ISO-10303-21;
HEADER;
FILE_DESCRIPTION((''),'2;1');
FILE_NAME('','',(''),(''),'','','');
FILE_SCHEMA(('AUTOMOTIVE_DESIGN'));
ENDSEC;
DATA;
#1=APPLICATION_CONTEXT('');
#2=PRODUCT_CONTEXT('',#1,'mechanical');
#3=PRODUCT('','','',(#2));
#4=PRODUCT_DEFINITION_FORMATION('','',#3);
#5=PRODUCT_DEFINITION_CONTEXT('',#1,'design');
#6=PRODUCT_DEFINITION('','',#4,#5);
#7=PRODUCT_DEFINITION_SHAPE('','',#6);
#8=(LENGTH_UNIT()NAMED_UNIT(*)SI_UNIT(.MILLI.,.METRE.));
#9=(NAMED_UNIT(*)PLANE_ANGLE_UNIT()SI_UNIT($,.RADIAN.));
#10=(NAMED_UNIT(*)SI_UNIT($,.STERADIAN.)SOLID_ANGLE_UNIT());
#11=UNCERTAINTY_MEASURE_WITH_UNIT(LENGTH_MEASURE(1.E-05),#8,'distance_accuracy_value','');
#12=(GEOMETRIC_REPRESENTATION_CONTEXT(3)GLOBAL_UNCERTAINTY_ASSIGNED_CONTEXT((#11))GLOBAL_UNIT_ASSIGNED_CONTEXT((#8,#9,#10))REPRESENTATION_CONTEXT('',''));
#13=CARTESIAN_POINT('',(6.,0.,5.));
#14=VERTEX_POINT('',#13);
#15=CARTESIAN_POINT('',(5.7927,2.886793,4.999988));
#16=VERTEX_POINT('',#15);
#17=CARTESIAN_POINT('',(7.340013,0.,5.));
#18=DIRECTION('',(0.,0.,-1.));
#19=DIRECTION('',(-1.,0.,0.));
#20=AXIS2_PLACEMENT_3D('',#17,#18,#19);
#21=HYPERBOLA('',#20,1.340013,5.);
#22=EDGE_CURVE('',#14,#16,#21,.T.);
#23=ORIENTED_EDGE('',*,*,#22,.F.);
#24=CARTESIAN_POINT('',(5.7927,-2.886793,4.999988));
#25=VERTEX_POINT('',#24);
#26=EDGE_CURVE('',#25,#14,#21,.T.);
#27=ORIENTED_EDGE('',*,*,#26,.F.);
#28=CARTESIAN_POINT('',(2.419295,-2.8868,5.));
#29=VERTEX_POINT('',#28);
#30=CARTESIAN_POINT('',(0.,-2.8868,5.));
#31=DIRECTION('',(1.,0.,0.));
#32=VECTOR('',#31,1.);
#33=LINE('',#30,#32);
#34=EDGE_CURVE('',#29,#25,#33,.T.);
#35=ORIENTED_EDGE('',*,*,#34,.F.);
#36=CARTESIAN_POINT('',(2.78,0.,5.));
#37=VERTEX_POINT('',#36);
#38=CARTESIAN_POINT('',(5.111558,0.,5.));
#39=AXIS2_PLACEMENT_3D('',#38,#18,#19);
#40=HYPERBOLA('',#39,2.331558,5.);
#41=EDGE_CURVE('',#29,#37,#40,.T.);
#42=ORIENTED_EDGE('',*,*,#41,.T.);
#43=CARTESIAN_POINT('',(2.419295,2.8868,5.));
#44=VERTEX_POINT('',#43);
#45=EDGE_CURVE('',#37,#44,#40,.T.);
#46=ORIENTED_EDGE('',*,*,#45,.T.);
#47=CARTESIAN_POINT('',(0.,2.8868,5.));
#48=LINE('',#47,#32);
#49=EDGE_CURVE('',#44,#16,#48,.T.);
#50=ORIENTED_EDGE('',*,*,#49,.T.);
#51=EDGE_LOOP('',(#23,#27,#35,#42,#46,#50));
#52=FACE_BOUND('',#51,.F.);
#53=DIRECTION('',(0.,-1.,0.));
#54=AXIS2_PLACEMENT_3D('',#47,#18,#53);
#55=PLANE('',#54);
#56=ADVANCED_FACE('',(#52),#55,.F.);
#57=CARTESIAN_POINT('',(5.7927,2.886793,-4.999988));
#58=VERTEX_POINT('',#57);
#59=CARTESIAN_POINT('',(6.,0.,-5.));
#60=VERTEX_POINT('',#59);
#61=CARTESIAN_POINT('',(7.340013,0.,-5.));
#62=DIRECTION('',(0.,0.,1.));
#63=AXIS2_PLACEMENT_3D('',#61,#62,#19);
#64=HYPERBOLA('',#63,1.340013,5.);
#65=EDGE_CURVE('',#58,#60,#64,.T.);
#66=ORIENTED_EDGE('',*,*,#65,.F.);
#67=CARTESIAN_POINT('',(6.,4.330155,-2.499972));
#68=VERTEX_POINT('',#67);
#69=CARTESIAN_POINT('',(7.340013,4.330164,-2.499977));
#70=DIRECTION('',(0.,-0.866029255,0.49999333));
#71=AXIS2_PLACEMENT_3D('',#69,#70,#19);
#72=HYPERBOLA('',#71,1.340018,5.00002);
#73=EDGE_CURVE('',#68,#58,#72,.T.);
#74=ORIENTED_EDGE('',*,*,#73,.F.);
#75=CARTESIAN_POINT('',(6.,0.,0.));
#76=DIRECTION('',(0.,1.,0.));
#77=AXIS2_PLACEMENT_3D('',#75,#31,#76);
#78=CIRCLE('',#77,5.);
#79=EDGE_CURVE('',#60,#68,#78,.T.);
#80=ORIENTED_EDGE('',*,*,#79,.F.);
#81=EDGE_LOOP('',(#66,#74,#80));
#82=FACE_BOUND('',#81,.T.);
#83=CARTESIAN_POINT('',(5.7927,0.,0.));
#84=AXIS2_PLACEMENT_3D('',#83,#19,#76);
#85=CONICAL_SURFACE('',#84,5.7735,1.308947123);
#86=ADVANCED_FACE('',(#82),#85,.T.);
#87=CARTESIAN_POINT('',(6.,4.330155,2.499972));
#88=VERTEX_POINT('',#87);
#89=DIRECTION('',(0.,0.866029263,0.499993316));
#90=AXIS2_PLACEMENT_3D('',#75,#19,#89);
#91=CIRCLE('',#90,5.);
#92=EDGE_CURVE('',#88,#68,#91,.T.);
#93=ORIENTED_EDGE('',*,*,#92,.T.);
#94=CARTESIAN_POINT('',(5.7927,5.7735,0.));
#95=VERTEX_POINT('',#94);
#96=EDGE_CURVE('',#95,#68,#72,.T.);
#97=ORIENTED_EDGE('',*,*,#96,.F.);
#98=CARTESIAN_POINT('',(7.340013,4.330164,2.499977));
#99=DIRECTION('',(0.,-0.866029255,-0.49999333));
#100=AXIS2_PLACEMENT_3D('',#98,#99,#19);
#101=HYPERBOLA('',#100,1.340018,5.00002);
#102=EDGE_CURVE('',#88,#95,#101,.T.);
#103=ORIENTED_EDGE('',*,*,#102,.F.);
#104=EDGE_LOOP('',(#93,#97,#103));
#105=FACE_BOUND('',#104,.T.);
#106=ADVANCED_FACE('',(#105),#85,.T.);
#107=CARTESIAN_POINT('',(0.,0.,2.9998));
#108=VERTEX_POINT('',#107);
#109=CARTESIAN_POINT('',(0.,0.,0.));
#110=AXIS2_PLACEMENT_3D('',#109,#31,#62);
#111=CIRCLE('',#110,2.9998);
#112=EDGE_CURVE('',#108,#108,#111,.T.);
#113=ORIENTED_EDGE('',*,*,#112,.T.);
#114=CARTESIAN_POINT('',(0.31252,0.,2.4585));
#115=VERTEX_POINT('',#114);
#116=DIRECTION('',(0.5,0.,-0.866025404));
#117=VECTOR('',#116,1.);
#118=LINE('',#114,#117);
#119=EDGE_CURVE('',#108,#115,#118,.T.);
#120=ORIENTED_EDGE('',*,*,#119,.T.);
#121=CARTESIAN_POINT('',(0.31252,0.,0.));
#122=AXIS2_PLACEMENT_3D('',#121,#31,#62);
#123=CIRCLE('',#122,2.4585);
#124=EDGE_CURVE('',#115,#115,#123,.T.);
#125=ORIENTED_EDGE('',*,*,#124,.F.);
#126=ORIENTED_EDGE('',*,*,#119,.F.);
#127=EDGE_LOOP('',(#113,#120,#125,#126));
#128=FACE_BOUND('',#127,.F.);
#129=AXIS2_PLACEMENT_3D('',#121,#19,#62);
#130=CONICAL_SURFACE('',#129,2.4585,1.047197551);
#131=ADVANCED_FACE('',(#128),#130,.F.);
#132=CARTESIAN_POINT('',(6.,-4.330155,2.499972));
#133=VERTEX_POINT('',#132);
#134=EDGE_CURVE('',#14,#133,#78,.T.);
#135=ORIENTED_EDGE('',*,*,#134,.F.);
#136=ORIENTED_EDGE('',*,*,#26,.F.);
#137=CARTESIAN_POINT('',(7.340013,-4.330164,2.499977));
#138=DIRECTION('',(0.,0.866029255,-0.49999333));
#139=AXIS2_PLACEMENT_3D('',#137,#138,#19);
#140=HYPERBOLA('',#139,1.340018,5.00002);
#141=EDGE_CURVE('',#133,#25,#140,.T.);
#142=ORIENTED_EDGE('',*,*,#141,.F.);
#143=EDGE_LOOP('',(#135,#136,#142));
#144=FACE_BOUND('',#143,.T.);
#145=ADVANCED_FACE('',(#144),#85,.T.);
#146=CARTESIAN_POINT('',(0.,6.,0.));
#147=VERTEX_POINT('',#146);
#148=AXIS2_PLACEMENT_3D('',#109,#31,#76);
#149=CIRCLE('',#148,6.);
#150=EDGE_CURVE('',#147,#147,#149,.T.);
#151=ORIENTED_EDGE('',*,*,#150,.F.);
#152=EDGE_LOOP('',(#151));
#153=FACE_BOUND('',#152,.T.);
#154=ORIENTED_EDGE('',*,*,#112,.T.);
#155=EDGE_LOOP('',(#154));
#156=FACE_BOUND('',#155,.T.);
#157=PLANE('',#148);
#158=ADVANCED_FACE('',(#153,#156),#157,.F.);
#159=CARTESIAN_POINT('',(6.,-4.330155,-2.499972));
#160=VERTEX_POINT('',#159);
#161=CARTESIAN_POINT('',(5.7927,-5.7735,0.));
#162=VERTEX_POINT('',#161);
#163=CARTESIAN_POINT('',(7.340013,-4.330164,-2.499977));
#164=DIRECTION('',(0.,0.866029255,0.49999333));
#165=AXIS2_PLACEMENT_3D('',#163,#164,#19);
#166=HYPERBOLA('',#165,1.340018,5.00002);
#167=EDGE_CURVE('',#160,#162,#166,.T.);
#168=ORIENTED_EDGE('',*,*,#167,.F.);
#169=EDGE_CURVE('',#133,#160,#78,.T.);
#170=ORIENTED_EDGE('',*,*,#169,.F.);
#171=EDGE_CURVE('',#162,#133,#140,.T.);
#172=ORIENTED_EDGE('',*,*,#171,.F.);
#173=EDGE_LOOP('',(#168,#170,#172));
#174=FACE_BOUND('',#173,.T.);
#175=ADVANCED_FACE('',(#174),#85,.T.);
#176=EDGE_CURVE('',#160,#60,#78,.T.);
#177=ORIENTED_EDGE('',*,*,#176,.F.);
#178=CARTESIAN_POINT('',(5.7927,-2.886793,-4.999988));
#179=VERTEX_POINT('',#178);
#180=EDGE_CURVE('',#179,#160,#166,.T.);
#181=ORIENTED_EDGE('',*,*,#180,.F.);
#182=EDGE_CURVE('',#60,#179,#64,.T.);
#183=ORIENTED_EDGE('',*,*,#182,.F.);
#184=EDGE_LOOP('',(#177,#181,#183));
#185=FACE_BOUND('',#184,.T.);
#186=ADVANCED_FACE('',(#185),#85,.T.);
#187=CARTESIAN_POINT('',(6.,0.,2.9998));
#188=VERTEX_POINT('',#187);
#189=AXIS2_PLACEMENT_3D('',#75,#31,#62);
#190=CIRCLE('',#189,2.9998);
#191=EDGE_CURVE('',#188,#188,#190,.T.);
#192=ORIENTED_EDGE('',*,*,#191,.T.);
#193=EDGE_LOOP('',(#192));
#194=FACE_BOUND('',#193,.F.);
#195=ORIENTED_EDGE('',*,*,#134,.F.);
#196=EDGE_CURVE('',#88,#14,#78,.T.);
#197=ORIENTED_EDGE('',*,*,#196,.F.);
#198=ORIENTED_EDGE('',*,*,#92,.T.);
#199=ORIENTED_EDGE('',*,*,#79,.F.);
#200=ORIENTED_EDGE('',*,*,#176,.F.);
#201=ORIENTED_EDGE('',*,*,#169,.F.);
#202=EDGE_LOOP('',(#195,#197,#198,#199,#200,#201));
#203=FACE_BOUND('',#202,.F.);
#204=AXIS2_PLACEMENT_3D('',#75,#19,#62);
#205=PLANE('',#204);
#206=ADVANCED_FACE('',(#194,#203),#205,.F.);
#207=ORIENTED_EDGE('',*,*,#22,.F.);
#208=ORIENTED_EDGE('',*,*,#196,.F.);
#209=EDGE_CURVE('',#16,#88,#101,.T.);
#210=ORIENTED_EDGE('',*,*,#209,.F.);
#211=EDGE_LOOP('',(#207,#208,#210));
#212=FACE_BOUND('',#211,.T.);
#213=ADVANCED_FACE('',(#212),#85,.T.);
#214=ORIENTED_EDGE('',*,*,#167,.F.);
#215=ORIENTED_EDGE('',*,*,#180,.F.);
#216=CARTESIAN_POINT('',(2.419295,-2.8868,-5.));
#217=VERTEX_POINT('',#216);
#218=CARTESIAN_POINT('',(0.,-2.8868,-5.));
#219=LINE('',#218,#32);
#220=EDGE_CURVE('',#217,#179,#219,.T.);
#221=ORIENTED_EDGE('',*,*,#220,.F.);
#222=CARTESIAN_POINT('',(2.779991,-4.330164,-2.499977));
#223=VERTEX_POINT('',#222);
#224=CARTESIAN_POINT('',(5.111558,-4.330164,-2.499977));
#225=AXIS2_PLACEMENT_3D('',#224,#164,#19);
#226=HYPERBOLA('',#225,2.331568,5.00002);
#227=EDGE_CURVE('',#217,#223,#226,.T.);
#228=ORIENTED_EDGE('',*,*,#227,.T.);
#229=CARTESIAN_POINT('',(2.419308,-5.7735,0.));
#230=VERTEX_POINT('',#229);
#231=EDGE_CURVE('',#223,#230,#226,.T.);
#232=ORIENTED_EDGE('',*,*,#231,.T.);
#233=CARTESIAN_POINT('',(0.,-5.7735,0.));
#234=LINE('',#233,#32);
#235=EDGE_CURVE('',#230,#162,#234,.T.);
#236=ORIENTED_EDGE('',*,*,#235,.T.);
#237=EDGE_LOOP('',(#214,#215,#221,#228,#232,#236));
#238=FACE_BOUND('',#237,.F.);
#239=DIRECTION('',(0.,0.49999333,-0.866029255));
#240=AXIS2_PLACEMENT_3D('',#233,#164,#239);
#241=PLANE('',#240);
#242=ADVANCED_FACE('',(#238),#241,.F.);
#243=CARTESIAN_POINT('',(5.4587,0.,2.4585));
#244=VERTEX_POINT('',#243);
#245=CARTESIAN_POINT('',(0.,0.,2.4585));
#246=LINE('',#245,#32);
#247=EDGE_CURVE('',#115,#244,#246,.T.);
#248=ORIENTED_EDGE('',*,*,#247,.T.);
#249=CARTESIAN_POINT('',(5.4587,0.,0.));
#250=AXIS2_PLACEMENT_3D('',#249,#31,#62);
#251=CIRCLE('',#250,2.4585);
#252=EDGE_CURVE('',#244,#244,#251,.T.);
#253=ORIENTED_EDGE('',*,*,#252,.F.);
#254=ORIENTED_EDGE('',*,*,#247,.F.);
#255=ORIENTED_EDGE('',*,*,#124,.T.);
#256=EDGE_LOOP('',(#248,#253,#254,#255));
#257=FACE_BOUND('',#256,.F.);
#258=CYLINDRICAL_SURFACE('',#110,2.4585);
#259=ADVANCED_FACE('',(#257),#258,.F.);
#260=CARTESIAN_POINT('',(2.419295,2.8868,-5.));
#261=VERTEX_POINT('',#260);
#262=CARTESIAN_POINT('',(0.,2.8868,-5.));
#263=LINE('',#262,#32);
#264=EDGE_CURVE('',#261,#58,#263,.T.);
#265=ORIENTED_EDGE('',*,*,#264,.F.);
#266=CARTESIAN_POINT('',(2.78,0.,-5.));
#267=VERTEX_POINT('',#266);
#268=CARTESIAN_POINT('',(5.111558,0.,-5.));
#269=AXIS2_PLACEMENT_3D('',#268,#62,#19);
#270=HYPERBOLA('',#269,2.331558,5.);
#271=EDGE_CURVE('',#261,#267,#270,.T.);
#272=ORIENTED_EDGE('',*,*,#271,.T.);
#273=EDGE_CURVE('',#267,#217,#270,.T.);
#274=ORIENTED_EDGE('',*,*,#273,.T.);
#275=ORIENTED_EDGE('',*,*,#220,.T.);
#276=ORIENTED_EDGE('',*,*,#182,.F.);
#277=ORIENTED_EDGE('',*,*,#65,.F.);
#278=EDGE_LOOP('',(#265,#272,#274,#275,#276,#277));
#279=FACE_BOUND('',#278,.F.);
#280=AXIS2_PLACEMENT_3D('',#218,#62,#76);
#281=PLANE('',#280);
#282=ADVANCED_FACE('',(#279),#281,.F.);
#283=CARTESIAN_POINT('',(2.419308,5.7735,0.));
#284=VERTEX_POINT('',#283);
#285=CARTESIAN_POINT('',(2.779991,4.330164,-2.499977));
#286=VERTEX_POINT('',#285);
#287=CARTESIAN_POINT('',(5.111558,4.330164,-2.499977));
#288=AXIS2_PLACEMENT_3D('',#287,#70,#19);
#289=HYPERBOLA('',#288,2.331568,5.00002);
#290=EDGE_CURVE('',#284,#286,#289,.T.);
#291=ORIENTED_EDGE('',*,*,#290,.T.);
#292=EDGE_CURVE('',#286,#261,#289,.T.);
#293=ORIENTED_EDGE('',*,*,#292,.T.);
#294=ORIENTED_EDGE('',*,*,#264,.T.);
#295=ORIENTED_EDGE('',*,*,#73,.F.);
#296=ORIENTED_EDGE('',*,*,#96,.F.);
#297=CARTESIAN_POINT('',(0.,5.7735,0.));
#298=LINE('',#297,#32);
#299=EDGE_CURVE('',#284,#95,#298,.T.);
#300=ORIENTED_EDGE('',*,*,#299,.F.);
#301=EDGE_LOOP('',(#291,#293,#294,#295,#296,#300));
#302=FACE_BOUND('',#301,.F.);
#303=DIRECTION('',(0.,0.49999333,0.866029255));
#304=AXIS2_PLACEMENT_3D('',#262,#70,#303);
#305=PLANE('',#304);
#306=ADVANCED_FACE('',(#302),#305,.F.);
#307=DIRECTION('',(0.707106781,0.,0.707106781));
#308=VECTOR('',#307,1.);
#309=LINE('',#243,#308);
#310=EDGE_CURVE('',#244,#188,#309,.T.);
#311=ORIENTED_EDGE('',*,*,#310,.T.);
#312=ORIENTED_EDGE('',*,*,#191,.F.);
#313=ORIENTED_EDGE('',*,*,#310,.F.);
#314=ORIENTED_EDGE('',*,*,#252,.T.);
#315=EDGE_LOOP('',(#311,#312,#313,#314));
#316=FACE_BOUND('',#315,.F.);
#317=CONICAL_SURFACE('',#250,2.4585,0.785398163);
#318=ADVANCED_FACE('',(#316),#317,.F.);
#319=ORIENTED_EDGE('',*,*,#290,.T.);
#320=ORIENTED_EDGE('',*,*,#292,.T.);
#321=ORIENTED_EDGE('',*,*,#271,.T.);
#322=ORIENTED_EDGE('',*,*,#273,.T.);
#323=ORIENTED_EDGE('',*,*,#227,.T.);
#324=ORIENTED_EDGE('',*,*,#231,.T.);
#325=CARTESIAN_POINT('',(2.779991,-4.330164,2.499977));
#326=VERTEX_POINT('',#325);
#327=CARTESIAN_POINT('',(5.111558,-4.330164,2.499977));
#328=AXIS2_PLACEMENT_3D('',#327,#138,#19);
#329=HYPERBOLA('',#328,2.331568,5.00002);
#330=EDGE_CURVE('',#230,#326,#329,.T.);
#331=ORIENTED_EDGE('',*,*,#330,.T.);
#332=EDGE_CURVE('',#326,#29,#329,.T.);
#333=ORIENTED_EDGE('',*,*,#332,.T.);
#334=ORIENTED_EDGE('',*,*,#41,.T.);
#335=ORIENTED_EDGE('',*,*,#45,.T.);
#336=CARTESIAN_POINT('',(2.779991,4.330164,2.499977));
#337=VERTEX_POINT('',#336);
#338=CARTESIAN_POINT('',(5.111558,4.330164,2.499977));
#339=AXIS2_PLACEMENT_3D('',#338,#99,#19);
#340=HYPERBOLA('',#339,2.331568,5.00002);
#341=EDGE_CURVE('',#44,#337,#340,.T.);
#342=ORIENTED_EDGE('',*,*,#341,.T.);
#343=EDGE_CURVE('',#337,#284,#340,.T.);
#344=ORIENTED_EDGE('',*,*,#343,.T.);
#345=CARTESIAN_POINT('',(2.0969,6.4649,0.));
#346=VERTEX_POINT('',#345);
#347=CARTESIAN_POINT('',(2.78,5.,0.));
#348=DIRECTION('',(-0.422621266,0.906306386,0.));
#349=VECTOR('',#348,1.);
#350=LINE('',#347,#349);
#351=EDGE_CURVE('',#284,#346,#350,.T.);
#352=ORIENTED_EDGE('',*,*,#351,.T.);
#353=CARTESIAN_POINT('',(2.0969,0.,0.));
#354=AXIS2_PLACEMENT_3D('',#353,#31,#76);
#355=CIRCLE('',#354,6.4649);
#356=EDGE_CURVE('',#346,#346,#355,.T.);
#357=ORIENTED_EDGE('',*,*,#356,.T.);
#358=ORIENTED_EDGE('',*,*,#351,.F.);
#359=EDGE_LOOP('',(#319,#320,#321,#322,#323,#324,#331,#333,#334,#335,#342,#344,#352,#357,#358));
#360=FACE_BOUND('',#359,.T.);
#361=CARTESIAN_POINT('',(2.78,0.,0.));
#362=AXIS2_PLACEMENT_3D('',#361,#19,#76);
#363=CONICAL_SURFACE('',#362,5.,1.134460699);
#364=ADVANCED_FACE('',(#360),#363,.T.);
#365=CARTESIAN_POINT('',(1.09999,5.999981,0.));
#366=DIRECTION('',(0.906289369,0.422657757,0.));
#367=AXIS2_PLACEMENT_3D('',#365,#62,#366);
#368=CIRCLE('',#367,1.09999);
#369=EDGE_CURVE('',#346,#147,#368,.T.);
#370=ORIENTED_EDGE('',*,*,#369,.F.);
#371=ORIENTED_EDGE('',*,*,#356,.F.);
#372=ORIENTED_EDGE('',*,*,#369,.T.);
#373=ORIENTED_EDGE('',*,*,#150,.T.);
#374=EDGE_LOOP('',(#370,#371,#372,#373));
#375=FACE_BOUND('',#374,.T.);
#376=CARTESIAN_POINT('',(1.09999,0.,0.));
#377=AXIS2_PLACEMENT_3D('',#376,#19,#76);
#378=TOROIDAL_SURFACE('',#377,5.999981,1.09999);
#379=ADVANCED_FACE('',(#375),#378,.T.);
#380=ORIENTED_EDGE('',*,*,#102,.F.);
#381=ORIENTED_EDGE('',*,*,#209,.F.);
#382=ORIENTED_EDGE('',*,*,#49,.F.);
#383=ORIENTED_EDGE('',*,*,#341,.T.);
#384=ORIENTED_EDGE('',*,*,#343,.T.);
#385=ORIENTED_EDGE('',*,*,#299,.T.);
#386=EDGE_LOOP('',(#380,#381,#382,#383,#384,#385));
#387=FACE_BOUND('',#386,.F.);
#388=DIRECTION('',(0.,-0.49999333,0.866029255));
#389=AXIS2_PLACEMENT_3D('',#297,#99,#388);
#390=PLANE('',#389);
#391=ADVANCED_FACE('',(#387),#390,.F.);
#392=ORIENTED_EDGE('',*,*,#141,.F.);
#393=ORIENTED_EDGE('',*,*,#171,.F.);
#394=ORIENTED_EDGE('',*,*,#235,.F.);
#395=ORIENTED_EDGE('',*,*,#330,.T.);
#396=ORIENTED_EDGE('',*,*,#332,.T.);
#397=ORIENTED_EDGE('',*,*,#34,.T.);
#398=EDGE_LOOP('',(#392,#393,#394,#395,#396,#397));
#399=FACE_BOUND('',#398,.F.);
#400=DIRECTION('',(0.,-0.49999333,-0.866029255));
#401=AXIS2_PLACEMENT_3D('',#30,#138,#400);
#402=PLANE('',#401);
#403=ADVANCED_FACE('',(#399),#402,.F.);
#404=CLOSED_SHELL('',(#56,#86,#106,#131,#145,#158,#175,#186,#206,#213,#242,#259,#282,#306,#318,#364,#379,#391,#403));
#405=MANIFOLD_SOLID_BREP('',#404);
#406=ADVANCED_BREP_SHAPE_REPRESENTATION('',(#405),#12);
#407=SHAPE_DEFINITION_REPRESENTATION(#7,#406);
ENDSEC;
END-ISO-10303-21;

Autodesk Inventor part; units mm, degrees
ref_plane "YZ Plane" through (0, 0, 0) normal (1, 0, 0) x (0, 1, 0)
ref_plane "XZ Plane" through (0, 0, 0) normal (0, 1, 0) x (-1, 0, 0)
sketch "Sketch1" plane through (0, 0, 0) normal (0, 0, 1) x (1, 0, 0)
  line L0 (-1.4239, 0) -> (7.2373, 0) projected
  line L1 (2.78, 5) -> (2.0969, 6.4649)
  line L2 (2.78, 5) -> (6, 5) construction
  line L3 (6, 5) -> (6, 0) construction
  arc A0 (2.0969, 6.4649) -> (0, 6) centre (1.1, 6) ccw
  line L4 (2.78, 5) -> (2.78, 0)
  line L5 (0, -1.4613) -> (0, 8.7676) projected
  point P0 (0, 0)
  dimension "d2" = 10
  dimension "d4" = 14.2
  dimension "d5" = 1.1
  dimension "d15" = 6
  dimension "d16" = 25
revolve "Ring" add sketch "Sketch1" angle 360 about axis through (-10, 0, 0) along (1, 0, 0)
sketch "Sketch2" plane through (0, 0, 0) normal (-1, 0, 0) x (0, 0, 1)
  circle A0 centre (0, 0) radius 4.9
  line L0 (-5, -2.8868) -> (-5, 2.8868)
  line L1 (-5, 2.8868) -> (0, 5.7735)
  line L2 (0, 5.7735) -> (5, 2.8868)
  line L3 (5, 2.8868) -> (5, -2.8868)
  line L4 (5, -2.8868) -> (0, -5.7735)
  line L5 (0, -5.7735) -> (-5, -2.8868)
  circle A1 centre (0, 0) radius 6 projected
  dimension "d6" = 11.547
extrude "Body" add sketch "Sketch2" against normal blind 6 contours A0 | L0 L1 L2 L3 L4 L5
sketch "Sketch3" plane through (0, 0, 0) normal (0, 0, 1) x (1, 0, 0)
  line L0 (2.4193, 5.7735) -> (6, 5.7735) projected
  line L1 (6, 2.8868) -> (6, 5.7735) projected
  line L2 (0, -6) -> (0, 6) projected
  line L3 (-1.2, 0) -> (7.2, 0) projected
  line L4 (5.7927, 5.7735) -> (6, 5)
  dimension "d10" = 15
  dimension "d11" = 10
revolve "Chamfer1" cut sketch "Sketch3" angle 360 about axis through (-10, 0, 0) along (1, 0, 0)
sketch "Sketch4" plane through (0, 0, 0) normal (-1, 0, 0) x (0, 0, 1)
  circle A0 centre (0, 0) radius 6 projected
hole "Thread" at (0, 0, 0) direction (1, 0, 0) diameter 4.917 end through all thread size "M6x1" class "6H" standard "ISO Metric profile"
chamfer "Chamfer2" distance 0.5413 angle 30 1 edges at (0, 0, -2.4585) measured on face at (0, 4.7554, -0.5774)
ref_plane "Work Plane1" through (20.959, 0, 0) normal (0, 0, -1) x (-1, 0, 0)
chamfer "Chamfer3" distance 0.5413 angle 45 1 edges at (6, 0, -2.4585)
equation "\"d2\" = SW"
equation "\"d4\" = LADI"
equation "\"d5\" = PHH"
equation "\"d15\" = KOH"
equation "\"d16\" = KEWI"
equation "\"d6\" = 1.1547 * SW"
equation "\"d7\" = KOH"
equation "\"d10\" = ANG1"
equation "\"d11\" = SW0"
equation "\"d12\" = -0.5 * GD1 + 0.5 * NND"
equation "\"d46\" = -0.5 * GD1 + 0.5 * NND"
equation "\"d51\" = -0.5 * GD1 + 0.5 * NND"
equation "\"ANG1\" = 15deg"
equation "\"KEWI\" = 25deg"
equation "\"NND\" = 6"
equation "\"LADI\" = 14.2"
equation "\"SW\" = 10"
equation "\"PHH\" = RR"
equation "\"KOH\" = NND"
equation "\"SW0\" = SW"
equation "\"d1\" = LADI"
equation "\"d3\" = PHH"
equation "\"GUL\" = 0.541266 * PTC"
equation "\"RR\" = 1.1"
equation "\"THREADDIA\" = 6"
equation "\"TOA\" = 30deg"
equation "\"PTC\" = 1"
equation "\"GAL\" = 0.541266 * PTC"
equation "\"E0\" = 1.155 * SW"
equation "\"GD1\" = 4.917468"
properties part number "DIN 6923 - M6" material "Steel, Mild"
